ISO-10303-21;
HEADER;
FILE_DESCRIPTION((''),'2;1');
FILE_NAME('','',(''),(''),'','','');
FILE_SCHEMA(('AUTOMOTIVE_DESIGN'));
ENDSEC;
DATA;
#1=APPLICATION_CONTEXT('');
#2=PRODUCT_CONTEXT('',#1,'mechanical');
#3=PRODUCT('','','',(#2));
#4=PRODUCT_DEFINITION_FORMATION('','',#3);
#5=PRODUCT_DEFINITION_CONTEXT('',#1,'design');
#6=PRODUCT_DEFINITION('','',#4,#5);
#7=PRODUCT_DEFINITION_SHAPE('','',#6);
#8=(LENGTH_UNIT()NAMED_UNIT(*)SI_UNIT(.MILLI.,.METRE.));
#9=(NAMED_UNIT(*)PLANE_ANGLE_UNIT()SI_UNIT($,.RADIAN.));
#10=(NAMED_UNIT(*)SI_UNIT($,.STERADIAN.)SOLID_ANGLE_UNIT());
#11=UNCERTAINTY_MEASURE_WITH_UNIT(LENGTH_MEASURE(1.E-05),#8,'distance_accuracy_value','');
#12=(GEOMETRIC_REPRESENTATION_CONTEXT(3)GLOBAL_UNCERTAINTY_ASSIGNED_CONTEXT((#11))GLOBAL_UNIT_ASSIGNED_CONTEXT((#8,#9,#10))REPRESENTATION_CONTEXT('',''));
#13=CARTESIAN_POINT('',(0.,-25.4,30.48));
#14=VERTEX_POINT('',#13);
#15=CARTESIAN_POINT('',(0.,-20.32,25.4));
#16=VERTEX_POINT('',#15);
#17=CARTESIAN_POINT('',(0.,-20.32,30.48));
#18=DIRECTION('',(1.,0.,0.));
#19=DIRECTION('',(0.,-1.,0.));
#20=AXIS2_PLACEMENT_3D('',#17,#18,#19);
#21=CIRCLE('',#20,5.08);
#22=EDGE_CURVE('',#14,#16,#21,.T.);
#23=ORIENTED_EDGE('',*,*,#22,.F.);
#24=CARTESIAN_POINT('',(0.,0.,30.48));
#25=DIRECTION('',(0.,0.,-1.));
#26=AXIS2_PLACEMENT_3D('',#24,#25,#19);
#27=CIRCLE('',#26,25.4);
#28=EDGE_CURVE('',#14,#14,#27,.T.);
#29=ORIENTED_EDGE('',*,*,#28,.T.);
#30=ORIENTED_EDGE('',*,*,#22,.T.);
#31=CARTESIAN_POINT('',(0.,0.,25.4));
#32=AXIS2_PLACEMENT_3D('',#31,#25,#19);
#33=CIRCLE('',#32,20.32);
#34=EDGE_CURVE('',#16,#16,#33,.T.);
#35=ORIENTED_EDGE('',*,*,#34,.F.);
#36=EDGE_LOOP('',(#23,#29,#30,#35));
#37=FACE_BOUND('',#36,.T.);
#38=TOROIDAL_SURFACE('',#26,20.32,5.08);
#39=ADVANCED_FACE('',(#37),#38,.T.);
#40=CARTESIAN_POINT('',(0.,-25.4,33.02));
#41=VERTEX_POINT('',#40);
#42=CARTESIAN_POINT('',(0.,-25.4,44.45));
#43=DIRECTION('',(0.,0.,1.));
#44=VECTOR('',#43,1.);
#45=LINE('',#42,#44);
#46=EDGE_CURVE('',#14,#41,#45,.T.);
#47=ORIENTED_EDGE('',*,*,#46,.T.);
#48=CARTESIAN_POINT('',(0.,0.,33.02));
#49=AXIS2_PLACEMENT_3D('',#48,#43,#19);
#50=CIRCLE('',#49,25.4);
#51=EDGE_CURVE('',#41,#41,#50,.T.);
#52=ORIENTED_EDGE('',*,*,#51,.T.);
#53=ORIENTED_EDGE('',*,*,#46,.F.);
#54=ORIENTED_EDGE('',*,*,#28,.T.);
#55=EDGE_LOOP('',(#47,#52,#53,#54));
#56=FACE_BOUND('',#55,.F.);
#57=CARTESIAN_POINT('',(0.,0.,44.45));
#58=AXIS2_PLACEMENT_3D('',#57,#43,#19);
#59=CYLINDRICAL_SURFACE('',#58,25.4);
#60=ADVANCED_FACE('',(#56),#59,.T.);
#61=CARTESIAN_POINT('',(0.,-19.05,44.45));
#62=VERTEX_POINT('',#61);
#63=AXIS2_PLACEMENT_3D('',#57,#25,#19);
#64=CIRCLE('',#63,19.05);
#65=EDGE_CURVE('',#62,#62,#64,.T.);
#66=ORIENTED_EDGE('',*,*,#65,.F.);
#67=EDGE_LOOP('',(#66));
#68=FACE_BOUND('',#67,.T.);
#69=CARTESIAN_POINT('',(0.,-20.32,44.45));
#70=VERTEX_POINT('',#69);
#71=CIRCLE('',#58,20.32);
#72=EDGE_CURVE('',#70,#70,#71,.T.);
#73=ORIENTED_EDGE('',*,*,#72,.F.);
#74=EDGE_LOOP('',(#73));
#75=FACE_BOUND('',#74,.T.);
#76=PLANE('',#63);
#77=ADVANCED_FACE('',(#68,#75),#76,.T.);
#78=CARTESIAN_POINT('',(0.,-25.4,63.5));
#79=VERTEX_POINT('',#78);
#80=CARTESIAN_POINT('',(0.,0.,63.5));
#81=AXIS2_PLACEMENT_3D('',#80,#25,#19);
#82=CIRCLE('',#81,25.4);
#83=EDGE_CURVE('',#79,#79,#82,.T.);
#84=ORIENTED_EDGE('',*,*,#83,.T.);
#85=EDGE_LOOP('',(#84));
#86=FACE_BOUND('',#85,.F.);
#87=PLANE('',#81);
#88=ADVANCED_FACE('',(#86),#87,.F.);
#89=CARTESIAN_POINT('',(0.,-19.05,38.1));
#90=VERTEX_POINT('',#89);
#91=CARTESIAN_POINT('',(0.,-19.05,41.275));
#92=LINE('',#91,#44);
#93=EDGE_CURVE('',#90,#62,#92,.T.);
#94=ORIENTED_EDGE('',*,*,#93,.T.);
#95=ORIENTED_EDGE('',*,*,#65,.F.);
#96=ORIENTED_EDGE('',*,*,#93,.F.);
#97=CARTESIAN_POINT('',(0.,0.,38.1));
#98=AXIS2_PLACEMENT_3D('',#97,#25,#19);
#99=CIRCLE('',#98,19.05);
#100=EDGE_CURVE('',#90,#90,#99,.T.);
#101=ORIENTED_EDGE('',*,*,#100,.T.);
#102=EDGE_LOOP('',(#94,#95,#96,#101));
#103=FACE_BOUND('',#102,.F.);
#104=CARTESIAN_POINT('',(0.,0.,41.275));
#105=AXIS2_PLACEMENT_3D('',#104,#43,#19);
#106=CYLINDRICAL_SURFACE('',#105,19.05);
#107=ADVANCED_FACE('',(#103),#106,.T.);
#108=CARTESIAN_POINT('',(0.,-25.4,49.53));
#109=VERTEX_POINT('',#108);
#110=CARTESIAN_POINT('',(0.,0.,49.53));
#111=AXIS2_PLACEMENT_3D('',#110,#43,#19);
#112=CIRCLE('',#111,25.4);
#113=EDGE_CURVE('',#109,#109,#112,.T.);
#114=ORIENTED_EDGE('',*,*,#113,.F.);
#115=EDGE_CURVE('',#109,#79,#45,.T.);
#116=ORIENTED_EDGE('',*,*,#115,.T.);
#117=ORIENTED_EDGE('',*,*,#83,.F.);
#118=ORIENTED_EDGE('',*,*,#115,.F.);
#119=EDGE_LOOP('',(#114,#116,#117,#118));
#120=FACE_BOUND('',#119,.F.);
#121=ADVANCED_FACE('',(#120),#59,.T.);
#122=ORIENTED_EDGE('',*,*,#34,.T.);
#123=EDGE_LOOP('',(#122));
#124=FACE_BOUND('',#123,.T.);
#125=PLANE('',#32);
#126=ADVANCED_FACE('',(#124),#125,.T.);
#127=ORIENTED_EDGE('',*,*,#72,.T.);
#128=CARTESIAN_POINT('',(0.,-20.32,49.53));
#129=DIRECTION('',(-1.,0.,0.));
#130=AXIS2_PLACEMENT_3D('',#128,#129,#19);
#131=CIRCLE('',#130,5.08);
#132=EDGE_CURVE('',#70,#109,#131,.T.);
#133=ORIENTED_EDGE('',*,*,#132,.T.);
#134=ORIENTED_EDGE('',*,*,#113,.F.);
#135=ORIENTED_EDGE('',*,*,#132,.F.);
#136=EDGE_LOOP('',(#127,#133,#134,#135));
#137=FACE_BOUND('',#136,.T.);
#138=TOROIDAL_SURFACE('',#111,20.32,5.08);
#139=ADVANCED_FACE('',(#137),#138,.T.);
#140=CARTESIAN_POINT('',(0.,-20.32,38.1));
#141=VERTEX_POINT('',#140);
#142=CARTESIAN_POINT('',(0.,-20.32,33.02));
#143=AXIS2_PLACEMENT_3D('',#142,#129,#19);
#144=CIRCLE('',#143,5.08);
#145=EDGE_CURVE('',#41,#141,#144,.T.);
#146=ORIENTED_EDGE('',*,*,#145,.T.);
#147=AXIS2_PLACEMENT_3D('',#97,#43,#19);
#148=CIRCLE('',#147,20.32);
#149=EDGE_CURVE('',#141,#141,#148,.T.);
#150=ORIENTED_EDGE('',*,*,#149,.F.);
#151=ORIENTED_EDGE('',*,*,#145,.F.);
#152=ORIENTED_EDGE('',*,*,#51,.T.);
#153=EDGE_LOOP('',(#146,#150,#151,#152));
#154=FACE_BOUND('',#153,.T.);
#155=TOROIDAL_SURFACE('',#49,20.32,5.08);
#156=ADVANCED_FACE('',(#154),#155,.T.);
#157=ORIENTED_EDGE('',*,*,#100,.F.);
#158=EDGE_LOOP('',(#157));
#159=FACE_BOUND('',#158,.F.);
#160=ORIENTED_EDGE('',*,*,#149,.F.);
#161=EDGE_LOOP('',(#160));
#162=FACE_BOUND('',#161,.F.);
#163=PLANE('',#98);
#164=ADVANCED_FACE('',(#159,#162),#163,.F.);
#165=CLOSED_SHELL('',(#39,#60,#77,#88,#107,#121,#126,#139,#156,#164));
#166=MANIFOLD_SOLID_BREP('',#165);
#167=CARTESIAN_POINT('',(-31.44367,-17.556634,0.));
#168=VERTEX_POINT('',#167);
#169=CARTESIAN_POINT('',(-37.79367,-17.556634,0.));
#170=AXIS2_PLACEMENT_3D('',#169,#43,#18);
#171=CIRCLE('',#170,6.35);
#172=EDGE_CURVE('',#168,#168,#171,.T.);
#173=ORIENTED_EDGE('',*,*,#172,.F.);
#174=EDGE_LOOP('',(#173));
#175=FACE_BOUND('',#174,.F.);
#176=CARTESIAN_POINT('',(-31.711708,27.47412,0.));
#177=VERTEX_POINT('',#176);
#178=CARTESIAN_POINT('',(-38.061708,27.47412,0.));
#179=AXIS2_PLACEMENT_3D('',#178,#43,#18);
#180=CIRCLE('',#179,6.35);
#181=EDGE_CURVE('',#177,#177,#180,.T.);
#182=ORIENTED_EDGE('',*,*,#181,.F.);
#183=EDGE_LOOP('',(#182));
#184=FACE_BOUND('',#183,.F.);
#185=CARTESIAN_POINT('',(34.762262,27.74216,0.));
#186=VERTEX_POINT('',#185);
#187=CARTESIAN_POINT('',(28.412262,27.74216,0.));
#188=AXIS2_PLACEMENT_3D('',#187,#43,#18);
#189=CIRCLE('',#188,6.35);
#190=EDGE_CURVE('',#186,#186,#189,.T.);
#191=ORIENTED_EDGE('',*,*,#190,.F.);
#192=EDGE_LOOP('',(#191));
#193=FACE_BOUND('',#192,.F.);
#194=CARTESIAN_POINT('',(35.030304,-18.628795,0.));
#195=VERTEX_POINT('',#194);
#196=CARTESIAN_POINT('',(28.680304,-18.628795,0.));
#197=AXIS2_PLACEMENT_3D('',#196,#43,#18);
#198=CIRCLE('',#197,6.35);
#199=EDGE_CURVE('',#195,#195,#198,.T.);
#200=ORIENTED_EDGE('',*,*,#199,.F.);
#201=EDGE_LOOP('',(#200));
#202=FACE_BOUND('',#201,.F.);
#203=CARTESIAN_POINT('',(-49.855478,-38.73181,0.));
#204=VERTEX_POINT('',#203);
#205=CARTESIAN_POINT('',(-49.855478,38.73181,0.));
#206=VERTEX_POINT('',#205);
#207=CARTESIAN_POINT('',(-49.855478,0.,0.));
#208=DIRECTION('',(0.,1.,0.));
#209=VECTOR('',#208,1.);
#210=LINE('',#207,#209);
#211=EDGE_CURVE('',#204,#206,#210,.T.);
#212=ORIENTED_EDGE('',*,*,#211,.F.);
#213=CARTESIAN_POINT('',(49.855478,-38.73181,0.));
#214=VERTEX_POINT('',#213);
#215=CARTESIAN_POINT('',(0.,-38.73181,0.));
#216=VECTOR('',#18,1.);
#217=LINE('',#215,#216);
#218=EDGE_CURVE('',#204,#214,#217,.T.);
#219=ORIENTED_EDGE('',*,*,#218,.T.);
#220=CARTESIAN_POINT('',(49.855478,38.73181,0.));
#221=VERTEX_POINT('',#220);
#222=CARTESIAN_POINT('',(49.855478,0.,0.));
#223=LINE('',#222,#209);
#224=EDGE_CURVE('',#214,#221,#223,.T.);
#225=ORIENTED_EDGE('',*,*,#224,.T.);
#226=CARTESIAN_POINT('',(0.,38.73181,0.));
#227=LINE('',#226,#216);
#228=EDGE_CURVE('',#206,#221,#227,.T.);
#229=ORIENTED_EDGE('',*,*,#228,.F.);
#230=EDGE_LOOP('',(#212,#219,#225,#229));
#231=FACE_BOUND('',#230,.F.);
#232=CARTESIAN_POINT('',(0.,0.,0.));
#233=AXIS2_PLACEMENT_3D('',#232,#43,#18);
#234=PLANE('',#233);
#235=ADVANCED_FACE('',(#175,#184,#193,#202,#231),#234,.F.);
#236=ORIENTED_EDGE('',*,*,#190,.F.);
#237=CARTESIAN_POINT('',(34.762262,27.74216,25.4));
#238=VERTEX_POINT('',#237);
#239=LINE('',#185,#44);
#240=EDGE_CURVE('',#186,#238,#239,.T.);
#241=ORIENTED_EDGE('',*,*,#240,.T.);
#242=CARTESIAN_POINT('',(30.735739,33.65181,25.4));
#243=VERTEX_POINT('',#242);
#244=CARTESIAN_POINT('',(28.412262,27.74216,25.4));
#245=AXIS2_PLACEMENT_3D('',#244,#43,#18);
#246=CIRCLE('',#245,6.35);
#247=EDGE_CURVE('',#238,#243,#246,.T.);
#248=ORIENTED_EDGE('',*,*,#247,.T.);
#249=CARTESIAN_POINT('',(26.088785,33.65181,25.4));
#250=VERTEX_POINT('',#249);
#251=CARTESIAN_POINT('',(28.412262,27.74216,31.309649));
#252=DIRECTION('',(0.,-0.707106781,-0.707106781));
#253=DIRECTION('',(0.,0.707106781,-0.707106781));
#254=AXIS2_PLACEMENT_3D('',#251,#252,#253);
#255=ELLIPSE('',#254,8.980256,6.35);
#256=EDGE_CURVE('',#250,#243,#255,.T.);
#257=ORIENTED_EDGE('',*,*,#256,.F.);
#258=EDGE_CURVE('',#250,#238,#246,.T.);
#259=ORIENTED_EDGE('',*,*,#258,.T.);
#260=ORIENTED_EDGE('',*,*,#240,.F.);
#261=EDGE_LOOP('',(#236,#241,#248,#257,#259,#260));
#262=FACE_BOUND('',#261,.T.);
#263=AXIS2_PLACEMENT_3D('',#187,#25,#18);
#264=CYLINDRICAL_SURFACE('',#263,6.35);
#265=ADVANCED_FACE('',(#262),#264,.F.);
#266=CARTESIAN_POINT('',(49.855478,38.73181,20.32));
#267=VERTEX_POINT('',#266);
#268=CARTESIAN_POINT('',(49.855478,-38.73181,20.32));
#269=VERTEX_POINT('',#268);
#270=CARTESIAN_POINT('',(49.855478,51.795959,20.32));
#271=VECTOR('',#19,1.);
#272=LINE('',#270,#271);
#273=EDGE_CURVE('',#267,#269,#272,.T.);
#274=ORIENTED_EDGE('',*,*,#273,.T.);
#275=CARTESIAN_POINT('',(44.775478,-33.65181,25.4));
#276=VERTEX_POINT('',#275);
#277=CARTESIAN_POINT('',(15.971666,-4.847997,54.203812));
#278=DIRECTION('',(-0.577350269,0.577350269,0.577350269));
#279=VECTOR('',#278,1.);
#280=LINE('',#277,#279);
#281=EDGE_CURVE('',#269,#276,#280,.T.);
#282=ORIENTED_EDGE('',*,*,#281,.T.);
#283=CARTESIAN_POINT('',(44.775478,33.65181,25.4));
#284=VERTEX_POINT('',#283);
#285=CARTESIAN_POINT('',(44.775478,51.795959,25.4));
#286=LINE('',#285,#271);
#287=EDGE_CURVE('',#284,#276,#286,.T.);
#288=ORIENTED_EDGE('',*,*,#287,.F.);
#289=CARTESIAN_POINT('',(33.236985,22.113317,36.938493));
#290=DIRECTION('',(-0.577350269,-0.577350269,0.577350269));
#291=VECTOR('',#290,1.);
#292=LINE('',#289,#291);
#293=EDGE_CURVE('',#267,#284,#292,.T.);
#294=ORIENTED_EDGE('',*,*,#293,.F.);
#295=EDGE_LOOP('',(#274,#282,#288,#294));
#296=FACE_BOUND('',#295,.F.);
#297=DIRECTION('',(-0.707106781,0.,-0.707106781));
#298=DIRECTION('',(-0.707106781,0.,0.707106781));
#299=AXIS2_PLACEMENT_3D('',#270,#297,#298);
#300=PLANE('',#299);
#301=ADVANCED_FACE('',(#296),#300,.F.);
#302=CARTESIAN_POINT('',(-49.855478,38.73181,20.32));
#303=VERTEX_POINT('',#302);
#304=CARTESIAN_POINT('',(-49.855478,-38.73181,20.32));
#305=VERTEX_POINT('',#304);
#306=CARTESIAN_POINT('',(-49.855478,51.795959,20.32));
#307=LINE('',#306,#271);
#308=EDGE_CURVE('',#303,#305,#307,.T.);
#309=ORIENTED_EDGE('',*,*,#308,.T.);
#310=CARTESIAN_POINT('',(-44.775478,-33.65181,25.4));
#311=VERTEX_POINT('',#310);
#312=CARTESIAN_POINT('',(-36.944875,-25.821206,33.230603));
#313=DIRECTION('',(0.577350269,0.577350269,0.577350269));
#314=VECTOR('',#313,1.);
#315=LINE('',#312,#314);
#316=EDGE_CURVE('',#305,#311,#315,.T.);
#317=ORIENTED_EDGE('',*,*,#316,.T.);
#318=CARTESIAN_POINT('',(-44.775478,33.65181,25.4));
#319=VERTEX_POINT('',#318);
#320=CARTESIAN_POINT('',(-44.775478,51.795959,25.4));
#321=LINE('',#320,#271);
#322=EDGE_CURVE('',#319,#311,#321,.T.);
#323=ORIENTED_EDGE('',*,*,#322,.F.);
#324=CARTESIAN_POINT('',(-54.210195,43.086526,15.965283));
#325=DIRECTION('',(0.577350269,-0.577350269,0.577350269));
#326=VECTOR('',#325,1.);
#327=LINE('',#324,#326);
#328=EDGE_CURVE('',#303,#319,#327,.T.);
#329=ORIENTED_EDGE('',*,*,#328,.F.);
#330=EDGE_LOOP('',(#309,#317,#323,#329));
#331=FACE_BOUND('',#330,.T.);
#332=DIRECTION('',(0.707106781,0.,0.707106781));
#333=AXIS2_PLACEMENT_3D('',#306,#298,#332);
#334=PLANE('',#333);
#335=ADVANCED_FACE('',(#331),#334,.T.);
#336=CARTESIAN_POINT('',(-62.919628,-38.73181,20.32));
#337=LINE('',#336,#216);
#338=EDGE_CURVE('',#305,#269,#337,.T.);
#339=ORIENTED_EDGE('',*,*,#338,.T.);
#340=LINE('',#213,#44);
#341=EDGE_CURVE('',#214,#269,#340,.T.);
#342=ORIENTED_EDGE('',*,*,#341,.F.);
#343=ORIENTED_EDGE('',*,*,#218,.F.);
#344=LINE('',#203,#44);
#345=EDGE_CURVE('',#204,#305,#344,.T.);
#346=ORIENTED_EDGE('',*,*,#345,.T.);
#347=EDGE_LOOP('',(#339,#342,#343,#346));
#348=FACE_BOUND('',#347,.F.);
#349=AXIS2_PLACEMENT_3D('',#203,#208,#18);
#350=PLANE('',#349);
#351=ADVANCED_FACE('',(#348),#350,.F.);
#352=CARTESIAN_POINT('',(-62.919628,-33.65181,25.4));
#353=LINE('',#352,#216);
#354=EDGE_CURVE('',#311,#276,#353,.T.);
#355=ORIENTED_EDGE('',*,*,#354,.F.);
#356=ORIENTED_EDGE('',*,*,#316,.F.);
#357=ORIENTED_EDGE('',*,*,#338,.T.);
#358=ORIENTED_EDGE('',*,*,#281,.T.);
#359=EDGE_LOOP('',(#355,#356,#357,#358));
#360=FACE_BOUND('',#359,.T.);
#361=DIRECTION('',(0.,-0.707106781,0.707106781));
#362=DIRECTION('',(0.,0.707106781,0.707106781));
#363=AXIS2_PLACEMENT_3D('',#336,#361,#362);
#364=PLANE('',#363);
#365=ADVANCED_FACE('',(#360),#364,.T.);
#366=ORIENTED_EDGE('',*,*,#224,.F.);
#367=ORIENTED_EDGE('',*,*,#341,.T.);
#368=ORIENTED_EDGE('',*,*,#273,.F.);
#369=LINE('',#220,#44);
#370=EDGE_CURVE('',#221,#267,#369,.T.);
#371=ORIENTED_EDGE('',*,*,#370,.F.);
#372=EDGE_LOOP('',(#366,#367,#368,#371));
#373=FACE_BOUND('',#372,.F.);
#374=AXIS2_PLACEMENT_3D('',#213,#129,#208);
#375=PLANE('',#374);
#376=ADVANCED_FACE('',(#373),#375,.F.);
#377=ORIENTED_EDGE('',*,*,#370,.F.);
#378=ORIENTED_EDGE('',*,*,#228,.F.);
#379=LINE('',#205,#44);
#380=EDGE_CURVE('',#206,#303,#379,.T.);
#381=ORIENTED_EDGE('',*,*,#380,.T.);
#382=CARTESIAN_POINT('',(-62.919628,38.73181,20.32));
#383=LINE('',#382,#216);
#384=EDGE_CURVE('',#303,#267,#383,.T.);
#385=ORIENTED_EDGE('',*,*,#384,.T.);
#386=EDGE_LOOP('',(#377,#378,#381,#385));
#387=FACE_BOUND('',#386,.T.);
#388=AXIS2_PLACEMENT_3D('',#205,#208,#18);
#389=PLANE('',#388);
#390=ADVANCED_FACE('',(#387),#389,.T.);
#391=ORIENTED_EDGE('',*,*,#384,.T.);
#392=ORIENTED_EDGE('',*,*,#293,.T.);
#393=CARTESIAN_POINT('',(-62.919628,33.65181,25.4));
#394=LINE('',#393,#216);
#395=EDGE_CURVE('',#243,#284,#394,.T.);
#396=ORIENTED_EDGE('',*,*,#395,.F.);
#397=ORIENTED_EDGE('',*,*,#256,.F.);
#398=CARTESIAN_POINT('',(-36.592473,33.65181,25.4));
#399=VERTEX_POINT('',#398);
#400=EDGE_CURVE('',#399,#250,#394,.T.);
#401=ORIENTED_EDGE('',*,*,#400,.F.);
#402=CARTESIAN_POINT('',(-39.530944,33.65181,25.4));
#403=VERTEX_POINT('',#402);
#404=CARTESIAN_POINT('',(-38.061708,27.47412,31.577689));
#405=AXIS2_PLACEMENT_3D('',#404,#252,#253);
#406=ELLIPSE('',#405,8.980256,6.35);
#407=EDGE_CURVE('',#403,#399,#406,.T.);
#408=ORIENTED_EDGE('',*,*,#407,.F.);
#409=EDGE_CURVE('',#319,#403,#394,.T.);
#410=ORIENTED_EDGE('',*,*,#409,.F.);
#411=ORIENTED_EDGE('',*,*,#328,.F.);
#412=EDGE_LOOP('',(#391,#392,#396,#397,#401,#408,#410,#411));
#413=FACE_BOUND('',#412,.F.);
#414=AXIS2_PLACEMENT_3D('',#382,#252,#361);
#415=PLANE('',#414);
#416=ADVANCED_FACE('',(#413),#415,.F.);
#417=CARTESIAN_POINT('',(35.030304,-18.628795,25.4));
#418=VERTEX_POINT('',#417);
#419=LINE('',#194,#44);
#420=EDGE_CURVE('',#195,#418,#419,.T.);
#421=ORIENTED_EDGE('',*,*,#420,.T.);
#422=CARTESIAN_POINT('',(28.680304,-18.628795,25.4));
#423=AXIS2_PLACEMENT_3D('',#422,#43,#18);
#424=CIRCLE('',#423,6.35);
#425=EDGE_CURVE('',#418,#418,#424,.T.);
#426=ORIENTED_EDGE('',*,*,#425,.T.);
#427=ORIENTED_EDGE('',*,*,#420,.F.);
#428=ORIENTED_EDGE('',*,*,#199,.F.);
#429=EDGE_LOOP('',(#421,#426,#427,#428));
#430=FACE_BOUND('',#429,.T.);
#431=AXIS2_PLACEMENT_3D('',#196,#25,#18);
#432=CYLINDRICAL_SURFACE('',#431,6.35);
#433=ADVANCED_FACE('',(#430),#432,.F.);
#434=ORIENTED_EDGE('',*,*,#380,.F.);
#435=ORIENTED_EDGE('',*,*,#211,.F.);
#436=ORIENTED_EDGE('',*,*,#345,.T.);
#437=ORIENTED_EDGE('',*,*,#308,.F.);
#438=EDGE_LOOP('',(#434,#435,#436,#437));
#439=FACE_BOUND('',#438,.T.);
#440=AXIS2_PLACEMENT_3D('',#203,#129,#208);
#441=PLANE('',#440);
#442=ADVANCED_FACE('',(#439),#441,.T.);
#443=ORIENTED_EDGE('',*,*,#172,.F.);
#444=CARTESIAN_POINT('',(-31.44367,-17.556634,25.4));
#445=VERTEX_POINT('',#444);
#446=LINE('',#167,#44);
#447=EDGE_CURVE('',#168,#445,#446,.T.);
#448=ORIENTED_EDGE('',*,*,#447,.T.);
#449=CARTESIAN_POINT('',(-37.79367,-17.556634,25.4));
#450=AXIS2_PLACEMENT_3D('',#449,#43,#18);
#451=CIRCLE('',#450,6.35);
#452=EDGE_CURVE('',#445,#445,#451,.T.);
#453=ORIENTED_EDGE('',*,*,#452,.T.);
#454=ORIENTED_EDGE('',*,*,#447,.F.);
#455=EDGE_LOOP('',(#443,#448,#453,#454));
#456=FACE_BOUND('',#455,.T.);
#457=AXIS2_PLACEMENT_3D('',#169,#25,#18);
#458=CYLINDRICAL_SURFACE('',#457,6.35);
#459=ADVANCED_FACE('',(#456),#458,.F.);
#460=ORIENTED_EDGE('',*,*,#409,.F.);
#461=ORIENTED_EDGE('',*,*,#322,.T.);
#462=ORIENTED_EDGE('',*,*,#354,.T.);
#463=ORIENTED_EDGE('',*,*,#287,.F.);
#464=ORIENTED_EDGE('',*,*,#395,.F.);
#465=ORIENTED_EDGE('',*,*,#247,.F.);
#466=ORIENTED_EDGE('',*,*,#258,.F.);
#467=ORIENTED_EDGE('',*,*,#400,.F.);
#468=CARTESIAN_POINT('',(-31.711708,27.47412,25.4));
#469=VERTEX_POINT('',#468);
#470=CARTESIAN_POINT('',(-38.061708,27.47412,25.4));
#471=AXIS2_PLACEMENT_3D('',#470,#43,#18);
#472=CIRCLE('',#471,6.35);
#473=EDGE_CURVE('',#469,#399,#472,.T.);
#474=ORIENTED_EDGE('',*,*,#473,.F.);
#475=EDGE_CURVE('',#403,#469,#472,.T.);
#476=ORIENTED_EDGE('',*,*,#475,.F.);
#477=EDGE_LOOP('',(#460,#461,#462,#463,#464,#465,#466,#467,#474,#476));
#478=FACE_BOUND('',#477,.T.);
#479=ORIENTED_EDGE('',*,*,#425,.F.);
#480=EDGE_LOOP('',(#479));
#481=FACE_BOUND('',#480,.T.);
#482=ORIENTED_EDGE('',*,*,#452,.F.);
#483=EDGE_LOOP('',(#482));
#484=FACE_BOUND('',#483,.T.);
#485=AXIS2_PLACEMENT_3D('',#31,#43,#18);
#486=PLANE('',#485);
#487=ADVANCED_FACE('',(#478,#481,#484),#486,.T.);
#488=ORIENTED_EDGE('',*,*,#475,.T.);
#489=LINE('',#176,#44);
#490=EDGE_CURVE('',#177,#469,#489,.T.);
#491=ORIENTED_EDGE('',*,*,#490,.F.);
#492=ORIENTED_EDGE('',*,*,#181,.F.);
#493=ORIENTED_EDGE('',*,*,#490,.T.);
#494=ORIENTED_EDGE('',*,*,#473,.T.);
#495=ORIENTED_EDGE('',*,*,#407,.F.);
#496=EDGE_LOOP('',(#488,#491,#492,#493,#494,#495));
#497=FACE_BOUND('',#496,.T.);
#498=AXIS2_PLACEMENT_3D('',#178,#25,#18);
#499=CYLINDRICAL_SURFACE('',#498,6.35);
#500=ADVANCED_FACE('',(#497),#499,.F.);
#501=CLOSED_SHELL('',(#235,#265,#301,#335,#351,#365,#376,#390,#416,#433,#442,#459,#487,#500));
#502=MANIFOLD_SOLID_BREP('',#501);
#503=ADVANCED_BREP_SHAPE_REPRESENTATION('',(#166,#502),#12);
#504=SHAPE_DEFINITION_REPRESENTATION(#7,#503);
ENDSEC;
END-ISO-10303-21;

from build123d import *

# Parameters (mm, degrees)
F0_W        = 99.7109562159
F0_H        = 77.463619411
F0_R        = 6.35
F1_DEPTH    = 25.4
F2_W        = 25.4
F2_H        = 38.1
F4_W        = 18.3200901883
F4_H        = 6.35
F6_T1_DEPTH = 103.5919185687
F6_T3_DEPTH = 125.8392553736
F7_R        = 5.08
F8_R        = 5.08


# Not quite as in the source:
# - a fillet or chamfer that OpenCascade refuses, or shapes differently, is made with other operations: its cross-section is extruded or revolved along the edge and cut away or added


with BuildPart() as f1:
    # F0 (on Top) → F1 (new body)
    with BuildSketch(Plane.XY):
        Rectangle(F0_W, F0_H)
        with Locations((-37.7936698496, -17.5566338003)):
            Circle(F0_R, mode=Mode.SUBTRACT)
        with Locations((28.6803040653, -18.6287946999)):
            Circle(F0_R, mode=Mode.SUBTRACT)
        with Locations((-38.0617082119, 27.4741202593)):
            Circle(F0_R, mode=Mode.SUBTRACT)
        with Locations((28.4122619778, 27.7421604842)):
            Circle(F0_R, mode=Mode.SUBTRACT)
    extrude(amount=F1_DEPTH)

    # F6: chamfer of 5.08 on 4 edges, made by hand

    # F6_s2 → F6_t1 (cut)
    with BuildSketch(Plane.XZ.offset(-51.7959592844)):
        Polygon((49.8554781079, 20.32), (44.7754781079, 25.4), (49.8554781079, 25.4), align=None)
        Polygon((-49.8554781079, 20.32), (-44.7754781079, 25.4), (-49.8554781079, 25.4), align=None)
    extrude(amount=F6_T1_DEPTH, mode=Mode.SUBTRACT)

    # F6_s4 → F6_t3 (cut)
    with BuildSketch(Plane.YZ.offset(-62.9196276868)):
        Polygon((38.7318097055, 20.32), (33.6518097055, 25.4), (38.7318097055, 25.4), align=None)
        Polygon((-38.7318097055, 20.32), (-33.6518097055, 25.4), (-38.7318097055, 25.4), align=None)
    extrude(amount=F6_T3_DEPTH, mode=Mode.SUBTRACT)


with BuildPart() as f3:
    # F2 (on Right) → F3 (revolve)
    with BuildSketch(Plane.YZ):
        with Locations((-12.7, 44.45)):
            Rectangle(F2_W, F2_H)
    revolve(axis=Axis((0, 0, 44.45), (0, 0, -1)))

    # F4 (on Right) → F5 (revolve, cut)
    with BuildSketch(Plane.YZ):
        with Locations((-28.2100450942, 41.275)):
            Rectangle(F4_W, F4_H)
    revolve(axis=Axis((0, 0, 63.5), (0, 0, -1)), mode=Mode.SUBTRACT)

    # F7
    f7_edges = [f3.edges().sort_by_distance(p)[0] for p in [
        (0, 25.4, 38.1),
        (0, 25.4, 44.45),
    ]]
    fillet(f7_edges, radius=F7_R)

    # F8
    f8_edges = [f3.edges().sort_by_distance(p)[0] for p in [
        (0, 25.4, 25.4),
    ]]
    fillet(f8_edges, radius=F8_R)


solid = Compound([f1.part, f3.part])
